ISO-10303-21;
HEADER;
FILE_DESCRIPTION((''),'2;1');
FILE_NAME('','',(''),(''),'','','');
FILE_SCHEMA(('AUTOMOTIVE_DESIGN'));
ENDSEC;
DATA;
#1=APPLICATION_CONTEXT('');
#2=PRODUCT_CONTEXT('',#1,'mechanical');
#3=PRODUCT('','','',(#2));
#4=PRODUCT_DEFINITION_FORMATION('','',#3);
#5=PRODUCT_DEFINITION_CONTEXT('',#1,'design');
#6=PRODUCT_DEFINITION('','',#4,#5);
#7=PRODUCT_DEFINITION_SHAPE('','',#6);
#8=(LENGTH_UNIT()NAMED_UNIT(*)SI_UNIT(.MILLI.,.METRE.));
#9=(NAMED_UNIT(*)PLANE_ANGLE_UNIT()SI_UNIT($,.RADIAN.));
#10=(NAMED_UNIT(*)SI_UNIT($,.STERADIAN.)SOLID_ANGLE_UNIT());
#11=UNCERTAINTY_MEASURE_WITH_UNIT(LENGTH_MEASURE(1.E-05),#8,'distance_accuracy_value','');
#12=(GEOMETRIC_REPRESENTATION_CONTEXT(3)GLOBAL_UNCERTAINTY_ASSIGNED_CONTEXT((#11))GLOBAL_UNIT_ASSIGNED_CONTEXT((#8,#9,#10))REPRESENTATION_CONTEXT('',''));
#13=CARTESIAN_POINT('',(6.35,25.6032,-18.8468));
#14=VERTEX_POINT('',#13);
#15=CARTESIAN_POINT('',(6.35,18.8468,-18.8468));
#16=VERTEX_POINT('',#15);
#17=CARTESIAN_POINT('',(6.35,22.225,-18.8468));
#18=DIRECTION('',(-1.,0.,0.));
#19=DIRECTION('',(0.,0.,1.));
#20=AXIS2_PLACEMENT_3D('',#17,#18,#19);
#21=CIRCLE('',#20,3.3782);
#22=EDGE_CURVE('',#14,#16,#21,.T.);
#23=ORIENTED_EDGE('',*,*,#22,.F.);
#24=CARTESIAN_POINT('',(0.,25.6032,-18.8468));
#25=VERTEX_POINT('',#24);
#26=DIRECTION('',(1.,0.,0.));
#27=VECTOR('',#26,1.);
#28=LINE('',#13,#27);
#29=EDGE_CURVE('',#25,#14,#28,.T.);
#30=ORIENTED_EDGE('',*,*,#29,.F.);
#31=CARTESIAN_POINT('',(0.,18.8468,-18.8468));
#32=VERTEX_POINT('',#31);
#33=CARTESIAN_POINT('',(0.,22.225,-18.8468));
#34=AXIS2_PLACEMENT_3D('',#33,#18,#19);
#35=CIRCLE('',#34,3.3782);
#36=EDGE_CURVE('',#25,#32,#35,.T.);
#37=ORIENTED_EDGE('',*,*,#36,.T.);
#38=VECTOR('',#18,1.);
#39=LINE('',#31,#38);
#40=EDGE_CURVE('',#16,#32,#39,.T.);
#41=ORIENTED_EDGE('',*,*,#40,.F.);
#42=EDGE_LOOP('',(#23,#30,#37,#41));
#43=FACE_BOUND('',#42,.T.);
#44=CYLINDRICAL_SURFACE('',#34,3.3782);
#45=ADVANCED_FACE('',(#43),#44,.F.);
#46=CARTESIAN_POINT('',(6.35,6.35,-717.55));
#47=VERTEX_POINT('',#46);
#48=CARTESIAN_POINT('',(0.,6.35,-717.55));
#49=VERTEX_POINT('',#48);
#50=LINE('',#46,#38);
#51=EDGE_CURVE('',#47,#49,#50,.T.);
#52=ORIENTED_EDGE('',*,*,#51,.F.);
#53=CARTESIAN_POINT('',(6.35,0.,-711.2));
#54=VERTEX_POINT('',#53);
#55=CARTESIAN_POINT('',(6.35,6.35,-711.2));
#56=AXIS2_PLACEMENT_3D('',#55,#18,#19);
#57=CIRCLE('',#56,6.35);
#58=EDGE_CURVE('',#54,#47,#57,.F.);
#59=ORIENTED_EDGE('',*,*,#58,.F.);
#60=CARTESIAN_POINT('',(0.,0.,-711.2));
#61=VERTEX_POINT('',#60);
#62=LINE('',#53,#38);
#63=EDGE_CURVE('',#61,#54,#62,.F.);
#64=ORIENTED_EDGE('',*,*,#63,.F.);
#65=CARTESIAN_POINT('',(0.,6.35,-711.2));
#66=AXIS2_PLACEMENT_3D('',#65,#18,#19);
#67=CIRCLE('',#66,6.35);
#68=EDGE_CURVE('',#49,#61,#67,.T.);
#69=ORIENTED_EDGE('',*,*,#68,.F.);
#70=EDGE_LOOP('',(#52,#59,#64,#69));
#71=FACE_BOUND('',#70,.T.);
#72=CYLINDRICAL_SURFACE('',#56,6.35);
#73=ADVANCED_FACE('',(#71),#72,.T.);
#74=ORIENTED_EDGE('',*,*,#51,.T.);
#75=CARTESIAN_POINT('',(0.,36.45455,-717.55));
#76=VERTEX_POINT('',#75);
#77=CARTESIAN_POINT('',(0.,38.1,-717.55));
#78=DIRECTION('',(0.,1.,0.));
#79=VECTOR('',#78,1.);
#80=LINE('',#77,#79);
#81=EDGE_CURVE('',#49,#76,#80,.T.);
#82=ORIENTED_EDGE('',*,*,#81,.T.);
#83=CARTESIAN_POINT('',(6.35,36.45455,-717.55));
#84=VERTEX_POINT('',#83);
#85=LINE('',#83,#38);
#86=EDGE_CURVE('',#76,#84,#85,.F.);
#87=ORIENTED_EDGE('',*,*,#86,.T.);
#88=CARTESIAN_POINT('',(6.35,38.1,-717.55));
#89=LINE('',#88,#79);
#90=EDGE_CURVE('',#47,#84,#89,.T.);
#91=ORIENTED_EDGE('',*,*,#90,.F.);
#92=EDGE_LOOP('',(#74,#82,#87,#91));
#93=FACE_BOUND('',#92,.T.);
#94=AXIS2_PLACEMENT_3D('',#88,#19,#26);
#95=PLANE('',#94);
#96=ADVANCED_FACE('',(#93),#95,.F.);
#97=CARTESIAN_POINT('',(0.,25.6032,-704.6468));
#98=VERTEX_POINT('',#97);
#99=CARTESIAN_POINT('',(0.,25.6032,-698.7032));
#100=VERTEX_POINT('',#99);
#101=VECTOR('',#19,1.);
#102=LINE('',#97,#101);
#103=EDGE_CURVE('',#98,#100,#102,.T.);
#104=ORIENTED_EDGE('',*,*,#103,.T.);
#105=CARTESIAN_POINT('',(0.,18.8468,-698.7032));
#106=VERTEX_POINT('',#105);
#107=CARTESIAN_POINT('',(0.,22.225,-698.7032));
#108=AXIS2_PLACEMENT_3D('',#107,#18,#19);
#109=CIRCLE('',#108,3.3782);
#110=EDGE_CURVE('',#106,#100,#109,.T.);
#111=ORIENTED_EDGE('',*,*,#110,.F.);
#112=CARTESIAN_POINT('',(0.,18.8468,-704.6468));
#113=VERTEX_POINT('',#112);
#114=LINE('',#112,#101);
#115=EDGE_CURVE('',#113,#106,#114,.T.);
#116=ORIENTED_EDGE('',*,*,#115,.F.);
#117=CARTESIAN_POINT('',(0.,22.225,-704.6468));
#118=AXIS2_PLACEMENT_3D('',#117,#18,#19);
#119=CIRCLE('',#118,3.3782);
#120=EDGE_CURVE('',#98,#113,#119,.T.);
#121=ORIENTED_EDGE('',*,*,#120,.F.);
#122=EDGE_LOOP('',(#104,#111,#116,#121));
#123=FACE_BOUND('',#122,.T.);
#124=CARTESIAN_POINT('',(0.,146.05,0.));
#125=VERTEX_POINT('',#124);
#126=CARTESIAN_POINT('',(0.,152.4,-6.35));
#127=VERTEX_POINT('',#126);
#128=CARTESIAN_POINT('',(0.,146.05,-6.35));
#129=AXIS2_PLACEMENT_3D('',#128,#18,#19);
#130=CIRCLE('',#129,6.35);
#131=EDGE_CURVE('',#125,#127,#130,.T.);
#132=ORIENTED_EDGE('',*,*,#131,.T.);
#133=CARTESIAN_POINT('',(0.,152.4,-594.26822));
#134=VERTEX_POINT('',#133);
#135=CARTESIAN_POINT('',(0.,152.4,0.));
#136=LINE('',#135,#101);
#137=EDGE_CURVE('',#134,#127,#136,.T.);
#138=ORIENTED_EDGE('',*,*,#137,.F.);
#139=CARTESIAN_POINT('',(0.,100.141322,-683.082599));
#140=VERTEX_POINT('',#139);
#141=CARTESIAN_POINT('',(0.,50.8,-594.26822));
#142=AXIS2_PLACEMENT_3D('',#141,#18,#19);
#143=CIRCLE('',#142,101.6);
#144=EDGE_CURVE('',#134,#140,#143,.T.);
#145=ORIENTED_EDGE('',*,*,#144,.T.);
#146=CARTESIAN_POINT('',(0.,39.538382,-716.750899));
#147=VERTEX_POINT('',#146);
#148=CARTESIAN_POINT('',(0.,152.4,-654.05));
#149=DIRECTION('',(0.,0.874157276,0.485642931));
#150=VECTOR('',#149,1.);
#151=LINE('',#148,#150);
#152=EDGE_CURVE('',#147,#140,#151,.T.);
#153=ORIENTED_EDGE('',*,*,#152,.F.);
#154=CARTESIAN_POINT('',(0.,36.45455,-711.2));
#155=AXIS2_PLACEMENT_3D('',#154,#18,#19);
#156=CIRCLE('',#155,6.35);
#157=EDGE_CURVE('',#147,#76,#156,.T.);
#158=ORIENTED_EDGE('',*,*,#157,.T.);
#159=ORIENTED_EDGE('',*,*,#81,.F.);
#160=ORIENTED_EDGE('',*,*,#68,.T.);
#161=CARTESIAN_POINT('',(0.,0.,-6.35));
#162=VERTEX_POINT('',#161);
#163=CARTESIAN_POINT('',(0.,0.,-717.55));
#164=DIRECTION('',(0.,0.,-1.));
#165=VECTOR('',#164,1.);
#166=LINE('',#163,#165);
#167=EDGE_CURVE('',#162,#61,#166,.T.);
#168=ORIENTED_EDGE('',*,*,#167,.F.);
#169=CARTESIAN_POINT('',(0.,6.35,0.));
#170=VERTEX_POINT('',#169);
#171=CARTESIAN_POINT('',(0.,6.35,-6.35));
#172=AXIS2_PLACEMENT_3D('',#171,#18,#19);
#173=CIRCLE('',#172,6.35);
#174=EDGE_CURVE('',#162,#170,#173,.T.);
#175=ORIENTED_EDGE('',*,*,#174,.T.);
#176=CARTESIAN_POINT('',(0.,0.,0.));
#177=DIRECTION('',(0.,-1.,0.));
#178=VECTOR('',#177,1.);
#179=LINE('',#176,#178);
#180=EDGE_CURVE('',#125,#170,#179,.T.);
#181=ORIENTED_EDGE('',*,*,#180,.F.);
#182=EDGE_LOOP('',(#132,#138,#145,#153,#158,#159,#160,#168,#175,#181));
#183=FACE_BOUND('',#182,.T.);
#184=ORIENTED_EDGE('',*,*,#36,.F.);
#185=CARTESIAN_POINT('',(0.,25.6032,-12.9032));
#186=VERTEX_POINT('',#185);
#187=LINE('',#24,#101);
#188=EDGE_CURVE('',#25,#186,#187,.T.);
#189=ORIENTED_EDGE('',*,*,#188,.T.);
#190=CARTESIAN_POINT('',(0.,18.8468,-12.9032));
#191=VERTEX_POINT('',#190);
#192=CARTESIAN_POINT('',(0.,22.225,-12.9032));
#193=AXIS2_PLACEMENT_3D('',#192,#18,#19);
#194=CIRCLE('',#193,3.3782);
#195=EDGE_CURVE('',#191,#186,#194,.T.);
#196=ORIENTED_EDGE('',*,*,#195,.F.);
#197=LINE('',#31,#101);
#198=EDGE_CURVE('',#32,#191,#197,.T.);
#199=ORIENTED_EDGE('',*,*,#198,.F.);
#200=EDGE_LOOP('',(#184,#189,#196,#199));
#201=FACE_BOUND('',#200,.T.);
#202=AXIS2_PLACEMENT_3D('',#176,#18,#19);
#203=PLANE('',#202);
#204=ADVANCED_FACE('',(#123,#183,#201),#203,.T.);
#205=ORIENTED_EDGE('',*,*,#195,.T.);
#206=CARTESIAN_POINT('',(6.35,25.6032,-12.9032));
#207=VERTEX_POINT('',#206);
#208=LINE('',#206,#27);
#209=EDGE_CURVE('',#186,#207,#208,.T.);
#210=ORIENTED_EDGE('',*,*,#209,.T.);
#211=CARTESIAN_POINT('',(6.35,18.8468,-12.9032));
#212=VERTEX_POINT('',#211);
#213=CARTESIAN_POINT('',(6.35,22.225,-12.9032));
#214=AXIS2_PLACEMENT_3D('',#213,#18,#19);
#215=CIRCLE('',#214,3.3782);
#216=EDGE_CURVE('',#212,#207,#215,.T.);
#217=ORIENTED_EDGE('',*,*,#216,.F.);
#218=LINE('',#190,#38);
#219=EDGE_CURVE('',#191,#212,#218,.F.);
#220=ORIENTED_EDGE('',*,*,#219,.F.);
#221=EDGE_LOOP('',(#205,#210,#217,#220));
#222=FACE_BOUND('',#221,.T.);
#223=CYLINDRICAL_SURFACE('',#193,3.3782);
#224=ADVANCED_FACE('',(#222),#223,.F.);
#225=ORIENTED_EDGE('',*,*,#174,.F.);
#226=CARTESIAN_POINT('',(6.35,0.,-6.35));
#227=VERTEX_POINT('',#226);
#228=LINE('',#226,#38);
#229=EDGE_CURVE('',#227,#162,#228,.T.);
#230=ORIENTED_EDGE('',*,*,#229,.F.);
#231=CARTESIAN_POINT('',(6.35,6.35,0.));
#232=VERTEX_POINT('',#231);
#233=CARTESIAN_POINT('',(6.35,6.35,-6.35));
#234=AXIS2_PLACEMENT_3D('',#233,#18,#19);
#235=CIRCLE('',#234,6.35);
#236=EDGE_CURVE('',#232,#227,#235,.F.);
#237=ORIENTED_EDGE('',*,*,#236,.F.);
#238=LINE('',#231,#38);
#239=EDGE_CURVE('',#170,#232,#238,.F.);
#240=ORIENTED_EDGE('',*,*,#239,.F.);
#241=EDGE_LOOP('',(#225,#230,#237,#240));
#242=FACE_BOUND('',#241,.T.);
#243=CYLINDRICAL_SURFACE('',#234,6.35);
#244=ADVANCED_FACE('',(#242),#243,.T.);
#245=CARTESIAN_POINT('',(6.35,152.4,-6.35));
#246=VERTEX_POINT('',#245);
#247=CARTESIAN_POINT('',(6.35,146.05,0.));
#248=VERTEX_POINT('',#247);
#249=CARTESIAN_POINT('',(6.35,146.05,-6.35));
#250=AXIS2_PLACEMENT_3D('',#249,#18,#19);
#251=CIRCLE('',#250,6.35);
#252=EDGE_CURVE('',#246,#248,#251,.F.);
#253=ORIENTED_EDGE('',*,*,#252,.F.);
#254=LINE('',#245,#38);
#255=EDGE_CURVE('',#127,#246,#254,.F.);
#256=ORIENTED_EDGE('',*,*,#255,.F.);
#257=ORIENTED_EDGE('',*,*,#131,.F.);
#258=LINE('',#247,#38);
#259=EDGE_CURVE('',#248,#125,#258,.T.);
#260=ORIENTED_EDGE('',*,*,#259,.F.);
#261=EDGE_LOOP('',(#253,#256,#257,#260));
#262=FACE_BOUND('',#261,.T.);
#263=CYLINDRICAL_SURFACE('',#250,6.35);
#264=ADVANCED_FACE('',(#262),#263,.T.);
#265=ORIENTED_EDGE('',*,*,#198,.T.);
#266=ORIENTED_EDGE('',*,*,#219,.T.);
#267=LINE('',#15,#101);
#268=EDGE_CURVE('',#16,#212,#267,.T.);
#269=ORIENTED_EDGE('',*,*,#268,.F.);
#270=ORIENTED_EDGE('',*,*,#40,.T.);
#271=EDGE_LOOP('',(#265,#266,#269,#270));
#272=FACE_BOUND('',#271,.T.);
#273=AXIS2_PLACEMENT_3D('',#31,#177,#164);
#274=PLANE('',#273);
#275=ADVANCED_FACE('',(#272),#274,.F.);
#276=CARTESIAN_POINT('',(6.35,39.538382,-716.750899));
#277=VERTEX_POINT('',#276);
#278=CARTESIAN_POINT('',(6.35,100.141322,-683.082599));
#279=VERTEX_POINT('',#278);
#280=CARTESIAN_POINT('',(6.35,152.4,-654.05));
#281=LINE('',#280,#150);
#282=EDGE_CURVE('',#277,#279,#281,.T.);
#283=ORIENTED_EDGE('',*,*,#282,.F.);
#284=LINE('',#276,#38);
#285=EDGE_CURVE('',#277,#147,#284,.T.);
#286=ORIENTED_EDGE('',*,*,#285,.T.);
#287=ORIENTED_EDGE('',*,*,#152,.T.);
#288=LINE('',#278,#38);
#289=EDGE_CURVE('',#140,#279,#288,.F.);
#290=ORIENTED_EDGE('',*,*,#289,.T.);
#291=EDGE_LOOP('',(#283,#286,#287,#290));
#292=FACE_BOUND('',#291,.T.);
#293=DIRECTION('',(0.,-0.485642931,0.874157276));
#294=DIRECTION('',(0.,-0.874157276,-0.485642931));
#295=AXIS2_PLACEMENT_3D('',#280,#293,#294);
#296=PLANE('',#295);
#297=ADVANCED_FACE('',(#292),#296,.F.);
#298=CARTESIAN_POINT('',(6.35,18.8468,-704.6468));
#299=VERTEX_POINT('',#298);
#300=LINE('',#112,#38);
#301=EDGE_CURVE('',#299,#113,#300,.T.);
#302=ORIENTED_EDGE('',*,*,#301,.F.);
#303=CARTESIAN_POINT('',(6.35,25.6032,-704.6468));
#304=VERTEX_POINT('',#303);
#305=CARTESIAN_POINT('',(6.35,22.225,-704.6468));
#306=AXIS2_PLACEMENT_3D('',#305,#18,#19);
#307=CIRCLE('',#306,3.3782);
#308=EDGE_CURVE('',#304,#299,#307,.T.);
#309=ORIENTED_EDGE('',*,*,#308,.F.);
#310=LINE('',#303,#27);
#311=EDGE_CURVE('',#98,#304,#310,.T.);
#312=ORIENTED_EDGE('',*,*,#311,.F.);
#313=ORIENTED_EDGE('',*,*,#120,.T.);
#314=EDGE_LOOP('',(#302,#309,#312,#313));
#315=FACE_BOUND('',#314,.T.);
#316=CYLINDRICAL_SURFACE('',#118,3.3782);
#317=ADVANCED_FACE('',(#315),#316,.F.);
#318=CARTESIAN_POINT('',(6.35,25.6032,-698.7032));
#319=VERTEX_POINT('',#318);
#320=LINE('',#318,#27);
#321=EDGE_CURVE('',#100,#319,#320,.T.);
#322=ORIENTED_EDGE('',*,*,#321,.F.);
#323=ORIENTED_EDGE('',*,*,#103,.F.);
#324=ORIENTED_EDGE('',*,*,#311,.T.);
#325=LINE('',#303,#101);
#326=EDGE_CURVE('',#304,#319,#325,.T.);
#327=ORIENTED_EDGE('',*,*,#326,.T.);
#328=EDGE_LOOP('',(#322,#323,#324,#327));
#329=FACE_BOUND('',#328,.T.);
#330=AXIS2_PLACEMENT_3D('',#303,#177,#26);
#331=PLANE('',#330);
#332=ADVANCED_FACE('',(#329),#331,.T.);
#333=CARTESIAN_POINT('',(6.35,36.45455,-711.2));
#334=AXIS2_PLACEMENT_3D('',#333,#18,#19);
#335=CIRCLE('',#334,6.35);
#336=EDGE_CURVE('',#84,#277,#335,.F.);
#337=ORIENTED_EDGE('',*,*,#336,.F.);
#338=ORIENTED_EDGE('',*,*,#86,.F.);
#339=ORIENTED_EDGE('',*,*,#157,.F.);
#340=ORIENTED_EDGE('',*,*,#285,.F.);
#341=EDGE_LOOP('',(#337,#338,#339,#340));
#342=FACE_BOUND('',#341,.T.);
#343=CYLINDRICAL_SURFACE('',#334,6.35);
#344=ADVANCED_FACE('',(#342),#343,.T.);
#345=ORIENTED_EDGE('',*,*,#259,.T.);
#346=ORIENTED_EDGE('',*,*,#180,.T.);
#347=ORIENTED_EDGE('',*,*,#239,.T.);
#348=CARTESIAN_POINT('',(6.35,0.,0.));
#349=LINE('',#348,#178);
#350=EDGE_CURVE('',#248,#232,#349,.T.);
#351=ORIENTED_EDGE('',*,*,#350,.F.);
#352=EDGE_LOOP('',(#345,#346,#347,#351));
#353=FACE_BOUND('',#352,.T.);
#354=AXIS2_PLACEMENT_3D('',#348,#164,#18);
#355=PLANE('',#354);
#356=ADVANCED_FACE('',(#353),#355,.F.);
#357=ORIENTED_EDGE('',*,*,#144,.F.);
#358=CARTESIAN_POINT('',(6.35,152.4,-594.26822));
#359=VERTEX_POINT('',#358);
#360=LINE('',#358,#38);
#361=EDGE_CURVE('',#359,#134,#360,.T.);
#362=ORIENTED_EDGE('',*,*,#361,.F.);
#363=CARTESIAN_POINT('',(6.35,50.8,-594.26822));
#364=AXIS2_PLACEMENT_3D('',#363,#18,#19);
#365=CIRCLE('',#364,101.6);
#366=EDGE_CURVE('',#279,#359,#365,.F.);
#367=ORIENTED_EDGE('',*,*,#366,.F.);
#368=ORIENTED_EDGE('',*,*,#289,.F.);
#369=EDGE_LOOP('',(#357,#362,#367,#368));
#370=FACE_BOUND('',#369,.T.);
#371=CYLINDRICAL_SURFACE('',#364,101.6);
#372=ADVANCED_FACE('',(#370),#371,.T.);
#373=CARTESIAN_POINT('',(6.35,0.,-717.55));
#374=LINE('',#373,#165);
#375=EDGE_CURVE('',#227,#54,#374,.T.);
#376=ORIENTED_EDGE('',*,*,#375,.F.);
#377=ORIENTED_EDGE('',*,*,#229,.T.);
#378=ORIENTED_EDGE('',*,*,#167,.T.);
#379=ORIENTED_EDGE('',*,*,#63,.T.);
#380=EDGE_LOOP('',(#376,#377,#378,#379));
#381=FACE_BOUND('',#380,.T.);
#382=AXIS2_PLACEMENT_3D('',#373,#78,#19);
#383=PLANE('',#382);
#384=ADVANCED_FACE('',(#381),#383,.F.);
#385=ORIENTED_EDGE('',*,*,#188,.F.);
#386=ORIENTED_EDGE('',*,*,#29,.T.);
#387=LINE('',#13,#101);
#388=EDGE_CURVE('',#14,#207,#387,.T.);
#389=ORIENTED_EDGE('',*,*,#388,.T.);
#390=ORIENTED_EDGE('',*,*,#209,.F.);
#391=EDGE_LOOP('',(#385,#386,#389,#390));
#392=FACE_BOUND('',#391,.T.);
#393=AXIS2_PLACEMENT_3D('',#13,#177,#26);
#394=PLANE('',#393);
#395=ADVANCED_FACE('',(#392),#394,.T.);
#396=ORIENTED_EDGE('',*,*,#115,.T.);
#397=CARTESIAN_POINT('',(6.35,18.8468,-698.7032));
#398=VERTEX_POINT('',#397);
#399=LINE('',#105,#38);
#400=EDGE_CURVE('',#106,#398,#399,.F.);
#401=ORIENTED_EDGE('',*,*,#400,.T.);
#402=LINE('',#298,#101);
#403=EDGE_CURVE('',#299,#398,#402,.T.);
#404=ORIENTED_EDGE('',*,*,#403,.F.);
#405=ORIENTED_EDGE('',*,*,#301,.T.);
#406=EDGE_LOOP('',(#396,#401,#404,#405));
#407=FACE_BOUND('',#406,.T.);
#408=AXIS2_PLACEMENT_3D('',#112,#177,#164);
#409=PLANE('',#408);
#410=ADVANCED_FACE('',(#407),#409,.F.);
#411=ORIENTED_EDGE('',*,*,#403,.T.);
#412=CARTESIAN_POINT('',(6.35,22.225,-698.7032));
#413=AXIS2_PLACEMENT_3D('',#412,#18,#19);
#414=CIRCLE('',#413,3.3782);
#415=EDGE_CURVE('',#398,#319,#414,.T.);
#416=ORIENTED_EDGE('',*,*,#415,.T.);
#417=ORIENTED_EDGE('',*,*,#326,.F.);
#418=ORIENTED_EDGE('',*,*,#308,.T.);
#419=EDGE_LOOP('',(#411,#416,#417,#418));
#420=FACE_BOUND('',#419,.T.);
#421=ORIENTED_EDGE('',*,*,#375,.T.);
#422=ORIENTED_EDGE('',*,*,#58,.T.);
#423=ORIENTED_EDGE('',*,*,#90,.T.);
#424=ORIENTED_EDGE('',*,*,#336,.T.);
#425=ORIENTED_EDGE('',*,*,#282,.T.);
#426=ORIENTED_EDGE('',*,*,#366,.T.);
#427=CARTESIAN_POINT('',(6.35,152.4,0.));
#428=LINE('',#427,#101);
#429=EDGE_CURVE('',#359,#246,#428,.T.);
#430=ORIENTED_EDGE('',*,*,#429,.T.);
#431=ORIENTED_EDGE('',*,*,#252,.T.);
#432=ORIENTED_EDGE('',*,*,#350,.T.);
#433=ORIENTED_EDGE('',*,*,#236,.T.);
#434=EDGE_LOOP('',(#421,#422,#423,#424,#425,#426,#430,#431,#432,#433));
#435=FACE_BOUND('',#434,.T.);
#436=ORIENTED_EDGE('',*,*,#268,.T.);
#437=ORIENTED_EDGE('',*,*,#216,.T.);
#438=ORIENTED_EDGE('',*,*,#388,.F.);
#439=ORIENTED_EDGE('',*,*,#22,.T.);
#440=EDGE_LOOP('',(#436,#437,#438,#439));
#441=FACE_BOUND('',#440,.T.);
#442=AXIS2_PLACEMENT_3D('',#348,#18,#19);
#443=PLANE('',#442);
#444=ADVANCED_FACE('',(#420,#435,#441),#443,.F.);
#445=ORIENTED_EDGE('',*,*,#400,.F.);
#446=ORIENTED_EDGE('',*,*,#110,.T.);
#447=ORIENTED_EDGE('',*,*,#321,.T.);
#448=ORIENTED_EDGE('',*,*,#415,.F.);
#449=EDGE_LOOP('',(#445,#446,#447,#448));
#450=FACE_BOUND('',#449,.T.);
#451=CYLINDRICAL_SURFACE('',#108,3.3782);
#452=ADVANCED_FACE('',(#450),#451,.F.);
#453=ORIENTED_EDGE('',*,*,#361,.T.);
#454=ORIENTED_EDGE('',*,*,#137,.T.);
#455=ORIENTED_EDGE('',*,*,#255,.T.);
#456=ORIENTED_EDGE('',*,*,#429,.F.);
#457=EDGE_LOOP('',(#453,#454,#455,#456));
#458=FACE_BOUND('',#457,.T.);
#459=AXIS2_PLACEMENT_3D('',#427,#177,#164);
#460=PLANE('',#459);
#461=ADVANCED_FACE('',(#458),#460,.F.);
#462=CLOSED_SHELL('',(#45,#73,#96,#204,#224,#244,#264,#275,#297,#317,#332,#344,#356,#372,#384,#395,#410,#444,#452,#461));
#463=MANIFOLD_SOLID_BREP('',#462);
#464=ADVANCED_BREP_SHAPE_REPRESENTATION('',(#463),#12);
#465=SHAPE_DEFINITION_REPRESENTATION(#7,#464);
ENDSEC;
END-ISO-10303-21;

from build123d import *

# Parameters (mm, degrees)
BOSS_EXTRUDE1_DEPTH         = 6.35
FILLET1_R                   = 101.6
F_1_4_CLEARANCE_SLOT1_DEPTH = 6.35
FILLET2_R                   = 6.35


# Read off the part's stored shape, not the designer's step: 1/4 Clearance Slot1
with BuildPart() as part:
    # Sketch1 → Boss-Extrude1 (new body)
    with BuildSketch(Plane(origin=(0, 0, 0), x_dir=(0, 0, -1), z_dir=(1, 0, 0))):
        Polygon((0, 0), (0, 152.4), (654.05, 152.4), (717.55, 38.1), (717.55, 0), align=None)
    extrude(amount=BOSS_EXTRUDE1_DEPTH)

    # Fillet1
    fillet1_edges = [part.edges().sort_by_distance(p)[0] for p in [
        (3.175, 152.4, -654.05),
    ]]
    fillet(fillet1_edges, radius=FILLET1_R)

    # 1/4 Clearance Slot1 outline → 1/4 Clearance Slot1 (cut)
    with BuildSketch(Plane.YZ):
        with BuildLine():
            ThreePointArc((25.6032, -698.7032), (22.225, -695.325), (18.8468, -698.7032))
            Line((18.8468, -698.7032), (18.8468, -704.6468))
            ThreePointArc((18.8468, -704.6468), (22.225, -708.025), (25.6032, -704.6468))
            Line((25.6032, -704.6468), (25.6032, -698.7032))
        make_face()
        with BuildLine():
            Line((25.6032, -18.8468), (25.6032, -12.9032))
            ThreePointArc((25.6032, -12.9032), (22.225, -9.525), (18.8468, -12.9032))
            Line((18.8468, -12.9032), (18.8468, -18.8468))
            ThreePointArc((18.8468, -18.8468), (22.225, -22.225), (25.6032, -18.8468))
        make_face()
    extrude(amount=F_1_4_CLEARANCE_SLOT1_DEPTH, mode=Mode.SUBTRACT)

    # Fillet2
    fillet2_edges = [part.edges().sort_by_distance(p)[0] for p in [
        (3.175, 0, 0),
        (3.175, 152.4, 0),
        (3.175, 38.1, -717.55),
        (3.175, 0, -717.55),
    ]]
    fillet(fillet2_edges, radius=FILLET2_R)


solid = part.part
